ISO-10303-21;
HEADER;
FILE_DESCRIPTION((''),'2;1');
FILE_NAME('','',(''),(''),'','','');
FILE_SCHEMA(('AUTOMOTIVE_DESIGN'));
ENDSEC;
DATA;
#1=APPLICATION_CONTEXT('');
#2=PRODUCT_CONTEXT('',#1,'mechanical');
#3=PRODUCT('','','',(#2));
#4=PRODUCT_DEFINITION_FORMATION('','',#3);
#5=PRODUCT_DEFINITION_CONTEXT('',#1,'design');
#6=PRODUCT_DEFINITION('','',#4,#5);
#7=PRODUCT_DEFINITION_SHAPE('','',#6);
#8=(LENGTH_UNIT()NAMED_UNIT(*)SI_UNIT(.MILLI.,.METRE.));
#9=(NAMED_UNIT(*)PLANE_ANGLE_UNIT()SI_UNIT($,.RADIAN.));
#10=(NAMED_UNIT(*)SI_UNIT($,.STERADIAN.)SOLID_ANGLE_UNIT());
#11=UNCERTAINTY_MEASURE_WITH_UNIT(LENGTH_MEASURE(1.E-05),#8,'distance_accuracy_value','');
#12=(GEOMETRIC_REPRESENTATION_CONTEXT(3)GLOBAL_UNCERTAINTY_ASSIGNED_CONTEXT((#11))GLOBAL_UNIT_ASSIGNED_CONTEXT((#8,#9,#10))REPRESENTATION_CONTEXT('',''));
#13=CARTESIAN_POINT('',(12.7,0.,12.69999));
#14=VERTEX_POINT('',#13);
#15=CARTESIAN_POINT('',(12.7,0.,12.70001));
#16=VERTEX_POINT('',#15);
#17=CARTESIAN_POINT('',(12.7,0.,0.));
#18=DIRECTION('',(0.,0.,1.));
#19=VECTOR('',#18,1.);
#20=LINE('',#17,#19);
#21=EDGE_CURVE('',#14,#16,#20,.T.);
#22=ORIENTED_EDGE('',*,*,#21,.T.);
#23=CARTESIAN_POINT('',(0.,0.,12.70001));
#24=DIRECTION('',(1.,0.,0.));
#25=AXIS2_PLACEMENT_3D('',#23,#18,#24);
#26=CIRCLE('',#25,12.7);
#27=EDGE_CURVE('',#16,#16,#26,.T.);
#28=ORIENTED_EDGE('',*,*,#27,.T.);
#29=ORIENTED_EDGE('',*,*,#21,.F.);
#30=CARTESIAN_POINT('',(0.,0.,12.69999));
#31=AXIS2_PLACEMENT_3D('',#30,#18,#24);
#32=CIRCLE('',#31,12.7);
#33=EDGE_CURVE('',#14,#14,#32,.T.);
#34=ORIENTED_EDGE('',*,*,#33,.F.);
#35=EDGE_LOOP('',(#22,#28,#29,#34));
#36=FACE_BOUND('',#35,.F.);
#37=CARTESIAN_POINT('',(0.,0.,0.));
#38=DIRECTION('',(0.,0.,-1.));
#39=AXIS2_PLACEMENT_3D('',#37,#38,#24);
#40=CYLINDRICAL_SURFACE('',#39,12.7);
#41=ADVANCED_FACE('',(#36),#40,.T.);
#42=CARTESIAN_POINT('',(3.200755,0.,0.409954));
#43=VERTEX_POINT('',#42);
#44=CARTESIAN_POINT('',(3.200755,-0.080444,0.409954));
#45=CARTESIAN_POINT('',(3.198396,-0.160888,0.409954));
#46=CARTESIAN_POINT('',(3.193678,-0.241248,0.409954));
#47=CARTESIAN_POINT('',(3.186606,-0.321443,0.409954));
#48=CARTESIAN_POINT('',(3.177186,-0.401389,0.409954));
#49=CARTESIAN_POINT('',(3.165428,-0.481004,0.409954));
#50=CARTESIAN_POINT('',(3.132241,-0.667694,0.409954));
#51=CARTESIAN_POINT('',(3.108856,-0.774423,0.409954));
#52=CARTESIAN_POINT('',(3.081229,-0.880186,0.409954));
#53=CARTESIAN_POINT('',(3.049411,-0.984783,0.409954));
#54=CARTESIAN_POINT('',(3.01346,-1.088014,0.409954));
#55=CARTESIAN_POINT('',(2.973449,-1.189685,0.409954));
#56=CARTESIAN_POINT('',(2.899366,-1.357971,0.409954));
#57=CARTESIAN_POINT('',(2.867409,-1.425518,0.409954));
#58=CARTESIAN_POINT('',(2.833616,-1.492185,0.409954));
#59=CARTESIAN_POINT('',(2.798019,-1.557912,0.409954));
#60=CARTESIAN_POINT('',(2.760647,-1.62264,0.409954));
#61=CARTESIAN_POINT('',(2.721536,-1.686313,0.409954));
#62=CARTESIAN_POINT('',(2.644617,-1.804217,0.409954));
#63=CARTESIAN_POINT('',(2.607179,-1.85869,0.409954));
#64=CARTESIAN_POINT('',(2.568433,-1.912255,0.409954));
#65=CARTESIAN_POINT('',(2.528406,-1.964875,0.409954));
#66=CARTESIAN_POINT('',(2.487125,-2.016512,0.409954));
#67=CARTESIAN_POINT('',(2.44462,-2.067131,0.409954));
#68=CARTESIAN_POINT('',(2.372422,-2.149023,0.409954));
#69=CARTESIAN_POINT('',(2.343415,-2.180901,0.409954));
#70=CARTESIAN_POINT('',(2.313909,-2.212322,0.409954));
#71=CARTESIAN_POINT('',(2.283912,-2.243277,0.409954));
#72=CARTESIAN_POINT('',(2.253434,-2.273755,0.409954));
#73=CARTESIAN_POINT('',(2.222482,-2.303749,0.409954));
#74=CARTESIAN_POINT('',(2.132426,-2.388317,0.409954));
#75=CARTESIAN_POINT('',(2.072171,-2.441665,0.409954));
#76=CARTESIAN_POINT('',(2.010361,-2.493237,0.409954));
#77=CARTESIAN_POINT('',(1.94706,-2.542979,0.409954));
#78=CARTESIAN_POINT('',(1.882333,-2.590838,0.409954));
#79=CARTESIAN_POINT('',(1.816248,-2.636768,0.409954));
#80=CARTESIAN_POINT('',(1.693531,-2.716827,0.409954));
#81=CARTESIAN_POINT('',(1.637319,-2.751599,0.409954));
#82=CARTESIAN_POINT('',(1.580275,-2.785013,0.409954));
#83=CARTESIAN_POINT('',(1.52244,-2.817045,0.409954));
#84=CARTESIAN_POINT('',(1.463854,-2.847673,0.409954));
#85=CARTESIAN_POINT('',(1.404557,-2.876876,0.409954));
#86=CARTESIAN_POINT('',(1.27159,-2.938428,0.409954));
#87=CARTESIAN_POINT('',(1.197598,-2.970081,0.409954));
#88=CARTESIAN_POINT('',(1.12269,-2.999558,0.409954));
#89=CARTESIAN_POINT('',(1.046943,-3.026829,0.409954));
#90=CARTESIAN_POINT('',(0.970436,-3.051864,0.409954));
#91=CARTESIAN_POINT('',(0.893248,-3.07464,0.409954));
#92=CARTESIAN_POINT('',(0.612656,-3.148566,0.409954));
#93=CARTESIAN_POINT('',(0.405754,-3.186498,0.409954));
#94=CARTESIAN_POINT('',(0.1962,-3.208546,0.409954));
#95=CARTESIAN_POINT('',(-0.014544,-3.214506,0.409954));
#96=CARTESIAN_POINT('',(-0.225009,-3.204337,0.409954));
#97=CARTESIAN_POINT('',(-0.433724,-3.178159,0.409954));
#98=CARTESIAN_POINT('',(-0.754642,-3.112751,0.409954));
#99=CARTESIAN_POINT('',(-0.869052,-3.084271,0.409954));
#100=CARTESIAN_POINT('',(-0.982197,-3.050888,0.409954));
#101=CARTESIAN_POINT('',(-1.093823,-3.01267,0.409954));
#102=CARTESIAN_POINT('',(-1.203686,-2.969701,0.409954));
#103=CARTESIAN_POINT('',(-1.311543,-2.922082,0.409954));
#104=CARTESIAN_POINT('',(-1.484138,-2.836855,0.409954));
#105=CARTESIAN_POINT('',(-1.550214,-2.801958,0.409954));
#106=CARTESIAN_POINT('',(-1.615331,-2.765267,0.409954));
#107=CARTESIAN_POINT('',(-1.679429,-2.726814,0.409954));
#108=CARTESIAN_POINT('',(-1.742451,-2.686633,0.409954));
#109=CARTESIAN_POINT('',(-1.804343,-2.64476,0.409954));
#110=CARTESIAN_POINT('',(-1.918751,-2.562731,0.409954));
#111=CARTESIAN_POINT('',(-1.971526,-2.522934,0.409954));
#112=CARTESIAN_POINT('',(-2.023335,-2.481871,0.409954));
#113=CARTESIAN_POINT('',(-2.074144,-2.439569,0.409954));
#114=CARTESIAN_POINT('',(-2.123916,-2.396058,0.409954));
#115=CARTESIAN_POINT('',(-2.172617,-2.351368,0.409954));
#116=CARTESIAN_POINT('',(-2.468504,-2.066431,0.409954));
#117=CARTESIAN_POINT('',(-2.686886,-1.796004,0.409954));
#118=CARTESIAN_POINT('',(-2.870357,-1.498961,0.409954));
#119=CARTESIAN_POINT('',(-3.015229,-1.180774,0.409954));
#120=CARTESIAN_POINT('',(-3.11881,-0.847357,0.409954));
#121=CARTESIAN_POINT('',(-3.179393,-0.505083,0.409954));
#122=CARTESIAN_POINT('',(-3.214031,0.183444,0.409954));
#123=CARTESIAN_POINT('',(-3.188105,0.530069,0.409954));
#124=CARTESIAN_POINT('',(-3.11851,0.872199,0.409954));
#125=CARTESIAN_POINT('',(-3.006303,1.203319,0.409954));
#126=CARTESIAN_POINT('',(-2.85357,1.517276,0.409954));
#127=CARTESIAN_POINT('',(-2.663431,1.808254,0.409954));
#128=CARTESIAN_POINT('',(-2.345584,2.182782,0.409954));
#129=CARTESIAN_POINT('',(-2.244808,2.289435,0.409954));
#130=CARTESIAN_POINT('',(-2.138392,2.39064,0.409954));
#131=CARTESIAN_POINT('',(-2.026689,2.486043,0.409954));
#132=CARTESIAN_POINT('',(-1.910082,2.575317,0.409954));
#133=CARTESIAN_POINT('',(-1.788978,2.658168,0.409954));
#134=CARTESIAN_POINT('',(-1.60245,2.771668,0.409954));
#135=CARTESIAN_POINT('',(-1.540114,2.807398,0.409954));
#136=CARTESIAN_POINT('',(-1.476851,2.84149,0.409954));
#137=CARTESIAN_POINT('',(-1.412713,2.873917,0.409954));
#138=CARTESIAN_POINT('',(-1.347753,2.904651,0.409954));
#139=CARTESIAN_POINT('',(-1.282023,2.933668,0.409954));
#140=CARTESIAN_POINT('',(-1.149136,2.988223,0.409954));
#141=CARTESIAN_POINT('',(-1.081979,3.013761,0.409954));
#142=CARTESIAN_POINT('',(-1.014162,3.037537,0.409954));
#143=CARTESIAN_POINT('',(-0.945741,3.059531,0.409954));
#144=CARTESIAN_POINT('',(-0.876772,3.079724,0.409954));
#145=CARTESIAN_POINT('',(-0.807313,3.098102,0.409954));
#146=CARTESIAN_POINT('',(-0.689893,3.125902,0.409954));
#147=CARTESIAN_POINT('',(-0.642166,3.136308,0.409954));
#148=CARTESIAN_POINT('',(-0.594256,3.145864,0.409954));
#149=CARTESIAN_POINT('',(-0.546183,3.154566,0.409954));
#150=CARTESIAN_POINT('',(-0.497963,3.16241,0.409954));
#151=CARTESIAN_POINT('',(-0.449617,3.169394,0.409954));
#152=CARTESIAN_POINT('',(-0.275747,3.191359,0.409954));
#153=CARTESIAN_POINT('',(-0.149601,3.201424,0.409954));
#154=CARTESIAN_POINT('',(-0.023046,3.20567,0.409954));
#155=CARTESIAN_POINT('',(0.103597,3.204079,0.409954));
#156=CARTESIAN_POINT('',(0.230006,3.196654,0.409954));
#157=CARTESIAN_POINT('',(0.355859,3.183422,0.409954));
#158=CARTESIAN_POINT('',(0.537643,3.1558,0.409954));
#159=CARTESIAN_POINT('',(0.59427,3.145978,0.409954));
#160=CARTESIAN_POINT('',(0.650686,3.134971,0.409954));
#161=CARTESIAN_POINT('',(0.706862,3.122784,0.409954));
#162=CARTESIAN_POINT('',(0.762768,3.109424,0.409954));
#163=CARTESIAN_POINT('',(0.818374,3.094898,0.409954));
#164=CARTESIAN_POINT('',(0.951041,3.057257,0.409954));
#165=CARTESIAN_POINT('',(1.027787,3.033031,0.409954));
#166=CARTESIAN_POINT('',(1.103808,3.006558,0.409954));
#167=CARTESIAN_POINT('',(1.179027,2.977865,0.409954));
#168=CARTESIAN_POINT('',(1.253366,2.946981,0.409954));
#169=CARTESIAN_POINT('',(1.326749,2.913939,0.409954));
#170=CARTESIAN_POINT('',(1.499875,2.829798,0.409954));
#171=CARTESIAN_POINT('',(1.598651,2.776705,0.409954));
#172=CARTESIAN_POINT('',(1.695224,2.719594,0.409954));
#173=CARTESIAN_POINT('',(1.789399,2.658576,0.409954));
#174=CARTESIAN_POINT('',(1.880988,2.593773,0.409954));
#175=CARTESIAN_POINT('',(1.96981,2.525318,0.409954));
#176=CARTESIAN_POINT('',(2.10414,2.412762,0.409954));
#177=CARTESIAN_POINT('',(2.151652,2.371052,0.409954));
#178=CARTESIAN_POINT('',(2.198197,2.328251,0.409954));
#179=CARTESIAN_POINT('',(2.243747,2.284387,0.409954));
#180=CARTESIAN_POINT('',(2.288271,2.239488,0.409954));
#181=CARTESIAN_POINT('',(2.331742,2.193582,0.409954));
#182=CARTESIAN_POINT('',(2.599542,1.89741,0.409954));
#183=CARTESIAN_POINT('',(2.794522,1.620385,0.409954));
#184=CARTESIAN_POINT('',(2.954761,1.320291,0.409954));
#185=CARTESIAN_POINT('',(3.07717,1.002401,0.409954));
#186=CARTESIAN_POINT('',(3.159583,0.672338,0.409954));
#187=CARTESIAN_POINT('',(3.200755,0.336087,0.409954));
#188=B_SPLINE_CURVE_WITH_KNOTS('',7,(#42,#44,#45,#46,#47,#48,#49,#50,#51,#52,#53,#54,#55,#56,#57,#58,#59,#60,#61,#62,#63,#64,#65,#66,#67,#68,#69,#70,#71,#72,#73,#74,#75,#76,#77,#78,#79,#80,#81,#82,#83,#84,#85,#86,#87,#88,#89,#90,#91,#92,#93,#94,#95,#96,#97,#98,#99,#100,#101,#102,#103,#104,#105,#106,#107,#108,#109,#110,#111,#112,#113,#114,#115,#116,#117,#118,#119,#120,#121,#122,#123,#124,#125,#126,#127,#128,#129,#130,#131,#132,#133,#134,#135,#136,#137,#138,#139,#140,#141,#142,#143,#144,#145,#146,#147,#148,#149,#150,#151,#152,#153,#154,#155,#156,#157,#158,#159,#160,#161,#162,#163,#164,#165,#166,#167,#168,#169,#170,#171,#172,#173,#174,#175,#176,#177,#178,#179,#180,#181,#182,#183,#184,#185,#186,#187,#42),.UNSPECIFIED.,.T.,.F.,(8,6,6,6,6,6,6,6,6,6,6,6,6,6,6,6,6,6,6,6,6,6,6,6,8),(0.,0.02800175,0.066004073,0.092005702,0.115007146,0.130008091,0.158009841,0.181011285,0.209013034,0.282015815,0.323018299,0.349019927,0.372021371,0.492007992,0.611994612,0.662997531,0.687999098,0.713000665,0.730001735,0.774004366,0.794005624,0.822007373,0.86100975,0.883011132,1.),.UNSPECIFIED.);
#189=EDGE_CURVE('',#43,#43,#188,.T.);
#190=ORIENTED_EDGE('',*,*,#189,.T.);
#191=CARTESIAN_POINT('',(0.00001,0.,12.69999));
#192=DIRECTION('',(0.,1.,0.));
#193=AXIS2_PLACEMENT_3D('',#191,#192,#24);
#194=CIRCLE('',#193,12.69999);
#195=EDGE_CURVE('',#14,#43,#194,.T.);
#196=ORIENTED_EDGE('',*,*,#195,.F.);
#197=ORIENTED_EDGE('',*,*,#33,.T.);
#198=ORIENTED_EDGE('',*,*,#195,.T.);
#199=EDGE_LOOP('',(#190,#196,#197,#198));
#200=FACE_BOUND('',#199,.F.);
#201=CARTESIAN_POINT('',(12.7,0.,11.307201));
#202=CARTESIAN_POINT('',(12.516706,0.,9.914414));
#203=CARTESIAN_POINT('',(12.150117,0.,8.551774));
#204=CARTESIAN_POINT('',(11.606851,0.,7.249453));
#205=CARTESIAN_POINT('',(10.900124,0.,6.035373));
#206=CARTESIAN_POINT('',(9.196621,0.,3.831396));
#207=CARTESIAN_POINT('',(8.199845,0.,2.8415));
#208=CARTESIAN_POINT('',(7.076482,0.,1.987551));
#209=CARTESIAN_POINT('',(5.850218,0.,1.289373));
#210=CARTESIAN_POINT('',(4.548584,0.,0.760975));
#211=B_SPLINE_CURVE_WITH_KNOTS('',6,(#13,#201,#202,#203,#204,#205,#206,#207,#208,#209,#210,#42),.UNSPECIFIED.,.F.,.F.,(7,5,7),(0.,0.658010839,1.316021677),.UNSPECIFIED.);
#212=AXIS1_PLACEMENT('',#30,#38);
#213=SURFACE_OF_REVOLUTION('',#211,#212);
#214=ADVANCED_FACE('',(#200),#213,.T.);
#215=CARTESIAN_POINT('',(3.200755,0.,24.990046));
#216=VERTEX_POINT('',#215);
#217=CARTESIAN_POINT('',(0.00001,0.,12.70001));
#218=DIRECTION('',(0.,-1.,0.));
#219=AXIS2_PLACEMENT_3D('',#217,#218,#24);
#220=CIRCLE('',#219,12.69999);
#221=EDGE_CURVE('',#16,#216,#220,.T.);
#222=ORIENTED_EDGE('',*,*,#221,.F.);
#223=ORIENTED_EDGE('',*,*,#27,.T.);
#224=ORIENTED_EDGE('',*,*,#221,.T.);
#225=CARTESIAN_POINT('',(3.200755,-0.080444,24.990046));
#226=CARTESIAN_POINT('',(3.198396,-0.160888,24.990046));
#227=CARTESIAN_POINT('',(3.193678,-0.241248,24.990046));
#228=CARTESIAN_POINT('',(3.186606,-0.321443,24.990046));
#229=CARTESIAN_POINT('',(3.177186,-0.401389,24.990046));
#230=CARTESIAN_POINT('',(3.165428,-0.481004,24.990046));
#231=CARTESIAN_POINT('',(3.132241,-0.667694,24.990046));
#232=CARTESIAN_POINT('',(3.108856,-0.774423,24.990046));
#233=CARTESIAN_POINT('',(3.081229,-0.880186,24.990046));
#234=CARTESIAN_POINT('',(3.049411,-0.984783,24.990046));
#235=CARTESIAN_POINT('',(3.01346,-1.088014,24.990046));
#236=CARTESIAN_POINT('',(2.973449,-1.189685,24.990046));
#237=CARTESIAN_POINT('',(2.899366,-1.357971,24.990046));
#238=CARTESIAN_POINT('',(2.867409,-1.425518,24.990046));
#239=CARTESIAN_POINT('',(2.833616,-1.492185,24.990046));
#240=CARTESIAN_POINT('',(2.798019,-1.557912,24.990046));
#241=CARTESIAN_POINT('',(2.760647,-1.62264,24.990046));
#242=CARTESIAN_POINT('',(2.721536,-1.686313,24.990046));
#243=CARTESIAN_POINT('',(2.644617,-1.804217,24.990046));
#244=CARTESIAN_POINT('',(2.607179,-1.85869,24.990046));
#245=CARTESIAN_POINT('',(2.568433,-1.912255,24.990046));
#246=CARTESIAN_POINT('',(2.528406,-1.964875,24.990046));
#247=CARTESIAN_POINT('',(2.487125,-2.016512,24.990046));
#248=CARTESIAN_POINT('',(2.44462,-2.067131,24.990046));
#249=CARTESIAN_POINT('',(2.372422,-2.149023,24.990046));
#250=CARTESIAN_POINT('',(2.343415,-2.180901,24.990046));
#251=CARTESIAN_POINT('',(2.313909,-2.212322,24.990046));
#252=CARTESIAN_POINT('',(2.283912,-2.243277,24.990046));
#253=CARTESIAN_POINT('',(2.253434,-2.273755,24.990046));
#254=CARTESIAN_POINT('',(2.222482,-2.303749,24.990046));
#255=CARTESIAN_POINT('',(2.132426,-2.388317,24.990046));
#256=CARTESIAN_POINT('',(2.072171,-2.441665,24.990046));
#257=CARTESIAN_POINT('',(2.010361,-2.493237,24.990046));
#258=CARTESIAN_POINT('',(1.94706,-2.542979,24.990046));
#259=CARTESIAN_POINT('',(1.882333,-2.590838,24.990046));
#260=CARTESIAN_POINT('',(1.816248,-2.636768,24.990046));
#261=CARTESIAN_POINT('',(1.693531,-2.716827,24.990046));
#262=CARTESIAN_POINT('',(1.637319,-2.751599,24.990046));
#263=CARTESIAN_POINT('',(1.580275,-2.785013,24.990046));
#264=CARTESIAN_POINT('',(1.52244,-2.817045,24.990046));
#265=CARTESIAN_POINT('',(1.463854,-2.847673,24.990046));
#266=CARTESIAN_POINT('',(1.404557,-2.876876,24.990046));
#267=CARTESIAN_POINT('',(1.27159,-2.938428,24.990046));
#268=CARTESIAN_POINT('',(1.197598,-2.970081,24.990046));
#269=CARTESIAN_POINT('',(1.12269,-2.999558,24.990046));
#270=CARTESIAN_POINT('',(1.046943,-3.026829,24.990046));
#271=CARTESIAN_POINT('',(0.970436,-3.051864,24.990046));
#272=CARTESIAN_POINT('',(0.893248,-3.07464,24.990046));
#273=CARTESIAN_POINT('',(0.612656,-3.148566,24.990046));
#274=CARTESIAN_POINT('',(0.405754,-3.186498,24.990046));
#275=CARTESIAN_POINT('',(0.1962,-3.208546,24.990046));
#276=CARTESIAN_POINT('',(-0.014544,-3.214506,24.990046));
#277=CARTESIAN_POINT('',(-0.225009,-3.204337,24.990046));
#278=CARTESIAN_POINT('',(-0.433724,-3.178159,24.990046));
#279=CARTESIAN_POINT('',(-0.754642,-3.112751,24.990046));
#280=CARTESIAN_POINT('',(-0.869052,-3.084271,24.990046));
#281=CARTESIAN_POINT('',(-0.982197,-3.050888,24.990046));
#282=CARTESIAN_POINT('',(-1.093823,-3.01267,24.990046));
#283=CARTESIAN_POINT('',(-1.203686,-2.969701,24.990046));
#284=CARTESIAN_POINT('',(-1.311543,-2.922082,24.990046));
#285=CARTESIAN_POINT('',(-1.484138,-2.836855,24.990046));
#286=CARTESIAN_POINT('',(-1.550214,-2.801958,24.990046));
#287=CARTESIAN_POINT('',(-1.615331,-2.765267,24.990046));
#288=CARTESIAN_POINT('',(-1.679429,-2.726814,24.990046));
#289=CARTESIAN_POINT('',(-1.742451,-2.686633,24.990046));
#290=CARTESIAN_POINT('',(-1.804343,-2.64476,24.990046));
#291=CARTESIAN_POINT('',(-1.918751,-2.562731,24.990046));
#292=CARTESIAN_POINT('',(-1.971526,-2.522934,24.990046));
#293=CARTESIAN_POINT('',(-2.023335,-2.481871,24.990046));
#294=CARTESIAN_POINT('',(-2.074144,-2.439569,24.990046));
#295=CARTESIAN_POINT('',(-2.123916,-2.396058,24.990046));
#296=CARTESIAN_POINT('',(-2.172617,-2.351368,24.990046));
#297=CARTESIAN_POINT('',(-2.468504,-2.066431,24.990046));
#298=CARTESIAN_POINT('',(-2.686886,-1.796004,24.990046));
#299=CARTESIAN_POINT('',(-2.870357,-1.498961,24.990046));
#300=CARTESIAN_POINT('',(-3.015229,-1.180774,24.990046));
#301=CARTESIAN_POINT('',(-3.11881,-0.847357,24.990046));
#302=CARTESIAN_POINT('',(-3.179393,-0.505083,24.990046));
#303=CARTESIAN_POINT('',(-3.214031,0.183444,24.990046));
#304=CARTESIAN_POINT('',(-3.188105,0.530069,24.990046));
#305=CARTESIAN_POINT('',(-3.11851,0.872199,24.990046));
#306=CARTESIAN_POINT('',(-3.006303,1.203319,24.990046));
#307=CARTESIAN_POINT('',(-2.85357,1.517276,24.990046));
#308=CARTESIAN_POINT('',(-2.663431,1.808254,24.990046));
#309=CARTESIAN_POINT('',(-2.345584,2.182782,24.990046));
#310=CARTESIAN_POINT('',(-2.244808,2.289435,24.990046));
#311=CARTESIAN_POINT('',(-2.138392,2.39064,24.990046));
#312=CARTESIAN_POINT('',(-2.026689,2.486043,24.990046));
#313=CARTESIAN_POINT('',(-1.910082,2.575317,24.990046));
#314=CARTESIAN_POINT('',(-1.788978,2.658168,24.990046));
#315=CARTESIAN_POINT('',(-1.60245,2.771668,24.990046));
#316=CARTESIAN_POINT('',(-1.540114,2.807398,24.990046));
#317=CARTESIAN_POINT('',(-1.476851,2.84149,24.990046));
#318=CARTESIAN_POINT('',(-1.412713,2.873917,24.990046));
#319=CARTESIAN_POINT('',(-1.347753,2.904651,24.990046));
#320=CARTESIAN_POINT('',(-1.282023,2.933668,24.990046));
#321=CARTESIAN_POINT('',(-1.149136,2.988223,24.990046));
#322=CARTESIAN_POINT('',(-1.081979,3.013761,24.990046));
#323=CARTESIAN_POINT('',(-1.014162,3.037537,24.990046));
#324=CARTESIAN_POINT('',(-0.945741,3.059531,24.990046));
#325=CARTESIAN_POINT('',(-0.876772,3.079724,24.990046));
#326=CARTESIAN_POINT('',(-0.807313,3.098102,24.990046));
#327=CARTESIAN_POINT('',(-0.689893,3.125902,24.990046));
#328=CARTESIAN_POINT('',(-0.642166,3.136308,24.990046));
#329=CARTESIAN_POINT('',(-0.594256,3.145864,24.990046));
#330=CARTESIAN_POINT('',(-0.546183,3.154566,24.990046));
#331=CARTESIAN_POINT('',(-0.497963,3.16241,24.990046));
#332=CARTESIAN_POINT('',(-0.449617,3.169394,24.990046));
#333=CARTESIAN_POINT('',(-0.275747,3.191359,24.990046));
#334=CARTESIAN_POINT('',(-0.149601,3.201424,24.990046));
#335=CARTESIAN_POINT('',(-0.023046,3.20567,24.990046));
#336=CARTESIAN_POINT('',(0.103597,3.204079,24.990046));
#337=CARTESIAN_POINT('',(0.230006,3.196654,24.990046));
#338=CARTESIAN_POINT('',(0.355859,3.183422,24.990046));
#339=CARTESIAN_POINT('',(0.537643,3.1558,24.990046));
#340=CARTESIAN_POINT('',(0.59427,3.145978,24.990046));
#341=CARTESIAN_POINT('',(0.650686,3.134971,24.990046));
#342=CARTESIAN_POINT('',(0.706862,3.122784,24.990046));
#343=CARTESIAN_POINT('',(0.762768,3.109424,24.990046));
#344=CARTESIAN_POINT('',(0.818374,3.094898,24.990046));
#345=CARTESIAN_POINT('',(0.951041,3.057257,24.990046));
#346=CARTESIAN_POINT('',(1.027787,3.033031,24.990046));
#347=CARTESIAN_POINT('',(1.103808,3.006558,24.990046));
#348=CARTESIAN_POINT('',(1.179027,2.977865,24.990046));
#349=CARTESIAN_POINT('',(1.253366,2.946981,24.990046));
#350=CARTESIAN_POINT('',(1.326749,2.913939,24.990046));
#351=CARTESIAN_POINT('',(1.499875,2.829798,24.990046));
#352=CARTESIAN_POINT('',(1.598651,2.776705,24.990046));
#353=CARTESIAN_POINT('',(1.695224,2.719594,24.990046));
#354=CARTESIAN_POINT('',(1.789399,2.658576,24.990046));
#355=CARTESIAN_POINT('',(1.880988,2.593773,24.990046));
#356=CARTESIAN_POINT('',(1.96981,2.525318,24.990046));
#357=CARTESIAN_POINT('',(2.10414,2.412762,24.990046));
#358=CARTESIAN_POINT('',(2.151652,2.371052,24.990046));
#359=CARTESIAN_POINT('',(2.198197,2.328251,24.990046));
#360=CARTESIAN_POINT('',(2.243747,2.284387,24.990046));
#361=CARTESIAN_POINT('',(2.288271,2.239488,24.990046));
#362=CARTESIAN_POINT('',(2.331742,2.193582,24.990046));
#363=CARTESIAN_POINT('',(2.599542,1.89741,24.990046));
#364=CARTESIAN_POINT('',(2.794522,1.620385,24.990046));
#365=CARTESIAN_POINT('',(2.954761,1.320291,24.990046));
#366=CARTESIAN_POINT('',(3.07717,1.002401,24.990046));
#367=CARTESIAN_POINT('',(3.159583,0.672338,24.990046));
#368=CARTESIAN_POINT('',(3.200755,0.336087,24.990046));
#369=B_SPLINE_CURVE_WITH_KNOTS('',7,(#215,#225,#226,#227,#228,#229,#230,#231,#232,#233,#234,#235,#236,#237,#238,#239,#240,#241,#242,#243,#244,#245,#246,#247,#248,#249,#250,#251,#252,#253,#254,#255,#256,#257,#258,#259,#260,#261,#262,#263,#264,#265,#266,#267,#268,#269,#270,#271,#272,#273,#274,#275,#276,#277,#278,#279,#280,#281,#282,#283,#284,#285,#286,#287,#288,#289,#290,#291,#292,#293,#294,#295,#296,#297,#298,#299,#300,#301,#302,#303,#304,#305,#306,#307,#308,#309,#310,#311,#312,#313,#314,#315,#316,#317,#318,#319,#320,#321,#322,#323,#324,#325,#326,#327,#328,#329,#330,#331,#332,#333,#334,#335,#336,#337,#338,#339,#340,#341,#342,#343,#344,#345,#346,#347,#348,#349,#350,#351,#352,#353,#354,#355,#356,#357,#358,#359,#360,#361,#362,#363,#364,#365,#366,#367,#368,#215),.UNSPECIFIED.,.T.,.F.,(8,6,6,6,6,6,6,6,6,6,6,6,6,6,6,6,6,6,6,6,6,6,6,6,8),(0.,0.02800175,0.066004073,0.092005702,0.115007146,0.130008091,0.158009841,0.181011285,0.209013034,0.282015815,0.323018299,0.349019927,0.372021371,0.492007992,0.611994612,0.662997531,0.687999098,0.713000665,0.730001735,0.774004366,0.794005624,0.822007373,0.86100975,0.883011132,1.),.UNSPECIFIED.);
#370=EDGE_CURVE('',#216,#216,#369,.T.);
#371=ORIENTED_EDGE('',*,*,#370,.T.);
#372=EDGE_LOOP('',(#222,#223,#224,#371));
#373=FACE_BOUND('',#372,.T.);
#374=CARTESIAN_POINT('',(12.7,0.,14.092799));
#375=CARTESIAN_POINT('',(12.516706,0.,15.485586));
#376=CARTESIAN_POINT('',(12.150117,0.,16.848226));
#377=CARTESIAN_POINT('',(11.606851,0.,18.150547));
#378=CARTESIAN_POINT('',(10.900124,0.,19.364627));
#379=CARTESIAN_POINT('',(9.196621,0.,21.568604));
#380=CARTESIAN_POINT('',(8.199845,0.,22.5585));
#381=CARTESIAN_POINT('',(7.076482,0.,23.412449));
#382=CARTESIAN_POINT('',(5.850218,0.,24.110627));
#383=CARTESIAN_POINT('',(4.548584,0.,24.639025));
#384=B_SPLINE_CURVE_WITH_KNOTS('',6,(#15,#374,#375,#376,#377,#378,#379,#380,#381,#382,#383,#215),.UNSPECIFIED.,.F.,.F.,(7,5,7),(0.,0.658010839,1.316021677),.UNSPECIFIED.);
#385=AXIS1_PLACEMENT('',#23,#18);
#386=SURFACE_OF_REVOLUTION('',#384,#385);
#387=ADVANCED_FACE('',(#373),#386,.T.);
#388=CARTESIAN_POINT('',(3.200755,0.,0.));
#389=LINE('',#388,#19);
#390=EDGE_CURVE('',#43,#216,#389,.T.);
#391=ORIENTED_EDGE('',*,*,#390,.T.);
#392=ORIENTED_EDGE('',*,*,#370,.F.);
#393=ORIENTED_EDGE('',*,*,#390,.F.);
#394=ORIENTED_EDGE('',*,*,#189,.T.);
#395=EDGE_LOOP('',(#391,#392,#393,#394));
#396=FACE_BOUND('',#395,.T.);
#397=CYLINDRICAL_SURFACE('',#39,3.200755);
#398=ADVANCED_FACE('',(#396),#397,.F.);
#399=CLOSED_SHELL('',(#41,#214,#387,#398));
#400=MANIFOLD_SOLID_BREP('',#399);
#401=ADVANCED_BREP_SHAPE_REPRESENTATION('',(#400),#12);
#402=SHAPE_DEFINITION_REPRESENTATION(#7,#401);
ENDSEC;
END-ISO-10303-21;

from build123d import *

# Parameters (mm, degrees)
F0_R     = 12.7
F1_DEPTH = 25.4
F2_R     = 12.69999
F3_R     = 3.2007546804
F4_DEPTH = 25.401


# Not quite as in the source:
# - a fillet or chamfer is up to 0.001 mm smaller than in the source, because OpenCascade refuses the exact size


with BuildPart() as f1:
    # F0 (on Top) → F1 (new body)
    with BuildSketch(Plane.XY):
        Circle(F0_R)
    extrude(amount=F1_DEPTH)

    # F2 (radius 12.7 in the source; OpenCascade refuses exactly that, so slightly less here)
    f2_edges = [f1.edges().sort_by_distance(p)[0] for p in [
        (-12.7, 0, 25.4),
        (-12.7, 0, 0),
    ]]
    fillet(f2_edges, radius=F2_R)

    # F3 (on Top) → F4 (cut, through all)
    with BuildSketch(Plane.XY):
        Circle(F3_R)
    extrude(amount=F4_DEPTH, mode=Mode.SUBTRACT)


solid = f1.part
